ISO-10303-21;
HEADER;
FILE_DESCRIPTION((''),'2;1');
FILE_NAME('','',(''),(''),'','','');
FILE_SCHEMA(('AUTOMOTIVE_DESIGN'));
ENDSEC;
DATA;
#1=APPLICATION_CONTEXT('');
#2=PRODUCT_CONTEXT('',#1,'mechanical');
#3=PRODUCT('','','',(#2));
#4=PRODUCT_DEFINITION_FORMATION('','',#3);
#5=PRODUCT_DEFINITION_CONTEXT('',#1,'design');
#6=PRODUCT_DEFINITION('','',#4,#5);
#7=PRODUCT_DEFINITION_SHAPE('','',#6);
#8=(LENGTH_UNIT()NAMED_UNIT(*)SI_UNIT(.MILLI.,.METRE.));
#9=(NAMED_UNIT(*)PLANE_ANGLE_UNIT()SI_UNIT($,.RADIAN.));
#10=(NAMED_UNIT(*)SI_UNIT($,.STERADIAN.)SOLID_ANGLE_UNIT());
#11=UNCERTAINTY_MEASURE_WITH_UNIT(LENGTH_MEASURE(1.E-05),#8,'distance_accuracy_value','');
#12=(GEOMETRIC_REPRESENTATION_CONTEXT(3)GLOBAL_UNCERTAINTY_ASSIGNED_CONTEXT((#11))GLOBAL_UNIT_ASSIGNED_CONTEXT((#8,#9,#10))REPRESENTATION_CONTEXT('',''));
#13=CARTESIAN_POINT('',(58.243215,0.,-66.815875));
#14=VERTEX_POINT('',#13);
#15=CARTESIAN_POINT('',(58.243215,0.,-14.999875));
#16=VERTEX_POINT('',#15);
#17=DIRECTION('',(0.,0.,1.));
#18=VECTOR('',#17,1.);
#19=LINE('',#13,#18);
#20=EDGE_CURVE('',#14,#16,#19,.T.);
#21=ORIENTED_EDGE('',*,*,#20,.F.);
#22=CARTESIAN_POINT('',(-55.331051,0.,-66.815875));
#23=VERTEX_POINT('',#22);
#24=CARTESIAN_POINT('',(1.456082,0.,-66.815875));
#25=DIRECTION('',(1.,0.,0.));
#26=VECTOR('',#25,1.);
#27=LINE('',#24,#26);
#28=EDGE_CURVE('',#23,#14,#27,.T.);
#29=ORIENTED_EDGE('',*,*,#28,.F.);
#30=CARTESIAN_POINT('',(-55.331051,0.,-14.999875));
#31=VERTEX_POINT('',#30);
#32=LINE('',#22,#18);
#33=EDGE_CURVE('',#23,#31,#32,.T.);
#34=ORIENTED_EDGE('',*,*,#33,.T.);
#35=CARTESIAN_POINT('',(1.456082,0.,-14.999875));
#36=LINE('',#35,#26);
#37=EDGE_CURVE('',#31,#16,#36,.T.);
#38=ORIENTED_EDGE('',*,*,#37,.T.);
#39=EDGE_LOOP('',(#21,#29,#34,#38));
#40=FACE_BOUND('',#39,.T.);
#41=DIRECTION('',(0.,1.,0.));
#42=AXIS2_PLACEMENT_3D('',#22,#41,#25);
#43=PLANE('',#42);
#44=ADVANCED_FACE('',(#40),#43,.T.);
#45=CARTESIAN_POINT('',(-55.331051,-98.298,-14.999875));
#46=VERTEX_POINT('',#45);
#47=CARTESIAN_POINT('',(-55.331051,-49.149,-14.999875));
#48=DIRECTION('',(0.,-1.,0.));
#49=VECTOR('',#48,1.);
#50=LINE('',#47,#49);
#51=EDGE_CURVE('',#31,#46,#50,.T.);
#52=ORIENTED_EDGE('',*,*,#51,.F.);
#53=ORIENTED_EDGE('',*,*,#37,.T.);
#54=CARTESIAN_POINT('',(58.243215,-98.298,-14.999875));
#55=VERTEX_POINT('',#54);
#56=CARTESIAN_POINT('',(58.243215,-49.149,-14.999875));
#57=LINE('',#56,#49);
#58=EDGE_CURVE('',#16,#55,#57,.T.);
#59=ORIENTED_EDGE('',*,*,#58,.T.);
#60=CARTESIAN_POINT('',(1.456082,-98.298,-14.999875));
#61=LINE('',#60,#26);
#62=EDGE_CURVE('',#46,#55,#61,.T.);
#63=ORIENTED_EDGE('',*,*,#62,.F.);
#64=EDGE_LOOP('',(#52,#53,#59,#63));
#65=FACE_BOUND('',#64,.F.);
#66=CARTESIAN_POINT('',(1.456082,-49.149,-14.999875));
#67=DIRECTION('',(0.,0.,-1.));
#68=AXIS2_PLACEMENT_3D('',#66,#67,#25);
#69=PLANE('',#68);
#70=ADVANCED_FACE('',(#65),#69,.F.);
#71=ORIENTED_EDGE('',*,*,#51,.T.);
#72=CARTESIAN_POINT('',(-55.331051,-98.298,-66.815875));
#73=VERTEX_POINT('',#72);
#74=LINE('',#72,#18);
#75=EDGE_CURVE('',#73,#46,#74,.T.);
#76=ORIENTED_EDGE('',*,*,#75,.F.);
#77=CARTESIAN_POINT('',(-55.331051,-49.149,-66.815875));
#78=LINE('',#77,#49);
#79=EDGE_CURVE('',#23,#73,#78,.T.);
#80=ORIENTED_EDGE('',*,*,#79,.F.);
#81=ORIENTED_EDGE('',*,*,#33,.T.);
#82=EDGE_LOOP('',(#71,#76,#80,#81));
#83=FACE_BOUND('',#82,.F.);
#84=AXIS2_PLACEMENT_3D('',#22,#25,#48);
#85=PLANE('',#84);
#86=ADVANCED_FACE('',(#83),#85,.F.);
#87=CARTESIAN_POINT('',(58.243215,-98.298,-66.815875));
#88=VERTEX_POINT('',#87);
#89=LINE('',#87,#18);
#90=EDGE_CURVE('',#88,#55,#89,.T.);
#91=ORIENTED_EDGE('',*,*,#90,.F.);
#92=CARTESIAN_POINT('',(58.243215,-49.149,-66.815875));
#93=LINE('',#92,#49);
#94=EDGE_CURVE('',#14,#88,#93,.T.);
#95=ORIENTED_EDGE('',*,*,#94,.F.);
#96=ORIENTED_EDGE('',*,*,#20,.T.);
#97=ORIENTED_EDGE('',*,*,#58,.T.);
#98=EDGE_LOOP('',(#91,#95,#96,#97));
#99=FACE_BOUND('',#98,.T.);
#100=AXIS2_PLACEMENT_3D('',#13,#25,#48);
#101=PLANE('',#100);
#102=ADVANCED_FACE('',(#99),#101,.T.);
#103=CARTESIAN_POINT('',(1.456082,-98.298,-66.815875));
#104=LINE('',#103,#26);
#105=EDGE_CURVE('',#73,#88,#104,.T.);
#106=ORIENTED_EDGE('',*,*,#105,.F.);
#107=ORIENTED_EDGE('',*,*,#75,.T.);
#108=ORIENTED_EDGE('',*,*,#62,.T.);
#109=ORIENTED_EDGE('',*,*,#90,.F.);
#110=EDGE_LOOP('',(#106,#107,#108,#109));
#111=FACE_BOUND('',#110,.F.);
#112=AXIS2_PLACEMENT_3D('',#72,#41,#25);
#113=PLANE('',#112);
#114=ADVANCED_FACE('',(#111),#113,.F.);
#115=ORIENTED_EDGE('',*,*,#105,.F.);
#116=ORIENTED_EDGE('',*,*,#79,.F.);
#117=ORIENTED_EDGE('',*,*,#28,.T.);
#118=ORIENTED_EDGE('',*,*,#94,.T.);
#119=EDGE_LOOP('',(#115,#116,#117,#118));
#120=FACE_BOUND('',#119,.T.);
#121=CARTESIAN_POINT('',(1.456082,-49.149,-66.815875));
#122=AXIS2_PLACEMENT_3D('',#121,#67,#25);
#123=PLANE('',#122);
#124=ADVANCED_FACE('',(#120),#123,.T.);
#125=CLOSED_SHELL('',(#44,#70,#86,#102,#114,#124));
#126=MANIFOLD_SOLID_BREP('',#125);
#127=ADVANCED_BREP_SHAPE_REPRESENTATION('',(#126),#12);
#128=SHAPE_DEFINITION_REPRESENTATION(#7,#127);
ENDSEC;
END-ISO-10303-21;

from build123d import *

# Parameters (mm, degrees)
F1_E0_TOP_W = 113.5742664337
F1_E0_TOP_H = 98.298
F2_DEPTH    = 51.816


with BuildPart() as f2:
    # F1_E0_top (on explicit) → F2 (new body)
    with BuildSketch(Plane(origin=(-55.3310513496, 0, -66.8158754706), x_dir=(1, 0, 0), z_dir=(0, 0, -1))):
        with Locations((56.7871332169, 49.149)):
            Rectangle(F1_E0_TOP_W, F1_E0_TOP_H)
    extrude(amount=-F2_DEPTH)


solid = f2.part
